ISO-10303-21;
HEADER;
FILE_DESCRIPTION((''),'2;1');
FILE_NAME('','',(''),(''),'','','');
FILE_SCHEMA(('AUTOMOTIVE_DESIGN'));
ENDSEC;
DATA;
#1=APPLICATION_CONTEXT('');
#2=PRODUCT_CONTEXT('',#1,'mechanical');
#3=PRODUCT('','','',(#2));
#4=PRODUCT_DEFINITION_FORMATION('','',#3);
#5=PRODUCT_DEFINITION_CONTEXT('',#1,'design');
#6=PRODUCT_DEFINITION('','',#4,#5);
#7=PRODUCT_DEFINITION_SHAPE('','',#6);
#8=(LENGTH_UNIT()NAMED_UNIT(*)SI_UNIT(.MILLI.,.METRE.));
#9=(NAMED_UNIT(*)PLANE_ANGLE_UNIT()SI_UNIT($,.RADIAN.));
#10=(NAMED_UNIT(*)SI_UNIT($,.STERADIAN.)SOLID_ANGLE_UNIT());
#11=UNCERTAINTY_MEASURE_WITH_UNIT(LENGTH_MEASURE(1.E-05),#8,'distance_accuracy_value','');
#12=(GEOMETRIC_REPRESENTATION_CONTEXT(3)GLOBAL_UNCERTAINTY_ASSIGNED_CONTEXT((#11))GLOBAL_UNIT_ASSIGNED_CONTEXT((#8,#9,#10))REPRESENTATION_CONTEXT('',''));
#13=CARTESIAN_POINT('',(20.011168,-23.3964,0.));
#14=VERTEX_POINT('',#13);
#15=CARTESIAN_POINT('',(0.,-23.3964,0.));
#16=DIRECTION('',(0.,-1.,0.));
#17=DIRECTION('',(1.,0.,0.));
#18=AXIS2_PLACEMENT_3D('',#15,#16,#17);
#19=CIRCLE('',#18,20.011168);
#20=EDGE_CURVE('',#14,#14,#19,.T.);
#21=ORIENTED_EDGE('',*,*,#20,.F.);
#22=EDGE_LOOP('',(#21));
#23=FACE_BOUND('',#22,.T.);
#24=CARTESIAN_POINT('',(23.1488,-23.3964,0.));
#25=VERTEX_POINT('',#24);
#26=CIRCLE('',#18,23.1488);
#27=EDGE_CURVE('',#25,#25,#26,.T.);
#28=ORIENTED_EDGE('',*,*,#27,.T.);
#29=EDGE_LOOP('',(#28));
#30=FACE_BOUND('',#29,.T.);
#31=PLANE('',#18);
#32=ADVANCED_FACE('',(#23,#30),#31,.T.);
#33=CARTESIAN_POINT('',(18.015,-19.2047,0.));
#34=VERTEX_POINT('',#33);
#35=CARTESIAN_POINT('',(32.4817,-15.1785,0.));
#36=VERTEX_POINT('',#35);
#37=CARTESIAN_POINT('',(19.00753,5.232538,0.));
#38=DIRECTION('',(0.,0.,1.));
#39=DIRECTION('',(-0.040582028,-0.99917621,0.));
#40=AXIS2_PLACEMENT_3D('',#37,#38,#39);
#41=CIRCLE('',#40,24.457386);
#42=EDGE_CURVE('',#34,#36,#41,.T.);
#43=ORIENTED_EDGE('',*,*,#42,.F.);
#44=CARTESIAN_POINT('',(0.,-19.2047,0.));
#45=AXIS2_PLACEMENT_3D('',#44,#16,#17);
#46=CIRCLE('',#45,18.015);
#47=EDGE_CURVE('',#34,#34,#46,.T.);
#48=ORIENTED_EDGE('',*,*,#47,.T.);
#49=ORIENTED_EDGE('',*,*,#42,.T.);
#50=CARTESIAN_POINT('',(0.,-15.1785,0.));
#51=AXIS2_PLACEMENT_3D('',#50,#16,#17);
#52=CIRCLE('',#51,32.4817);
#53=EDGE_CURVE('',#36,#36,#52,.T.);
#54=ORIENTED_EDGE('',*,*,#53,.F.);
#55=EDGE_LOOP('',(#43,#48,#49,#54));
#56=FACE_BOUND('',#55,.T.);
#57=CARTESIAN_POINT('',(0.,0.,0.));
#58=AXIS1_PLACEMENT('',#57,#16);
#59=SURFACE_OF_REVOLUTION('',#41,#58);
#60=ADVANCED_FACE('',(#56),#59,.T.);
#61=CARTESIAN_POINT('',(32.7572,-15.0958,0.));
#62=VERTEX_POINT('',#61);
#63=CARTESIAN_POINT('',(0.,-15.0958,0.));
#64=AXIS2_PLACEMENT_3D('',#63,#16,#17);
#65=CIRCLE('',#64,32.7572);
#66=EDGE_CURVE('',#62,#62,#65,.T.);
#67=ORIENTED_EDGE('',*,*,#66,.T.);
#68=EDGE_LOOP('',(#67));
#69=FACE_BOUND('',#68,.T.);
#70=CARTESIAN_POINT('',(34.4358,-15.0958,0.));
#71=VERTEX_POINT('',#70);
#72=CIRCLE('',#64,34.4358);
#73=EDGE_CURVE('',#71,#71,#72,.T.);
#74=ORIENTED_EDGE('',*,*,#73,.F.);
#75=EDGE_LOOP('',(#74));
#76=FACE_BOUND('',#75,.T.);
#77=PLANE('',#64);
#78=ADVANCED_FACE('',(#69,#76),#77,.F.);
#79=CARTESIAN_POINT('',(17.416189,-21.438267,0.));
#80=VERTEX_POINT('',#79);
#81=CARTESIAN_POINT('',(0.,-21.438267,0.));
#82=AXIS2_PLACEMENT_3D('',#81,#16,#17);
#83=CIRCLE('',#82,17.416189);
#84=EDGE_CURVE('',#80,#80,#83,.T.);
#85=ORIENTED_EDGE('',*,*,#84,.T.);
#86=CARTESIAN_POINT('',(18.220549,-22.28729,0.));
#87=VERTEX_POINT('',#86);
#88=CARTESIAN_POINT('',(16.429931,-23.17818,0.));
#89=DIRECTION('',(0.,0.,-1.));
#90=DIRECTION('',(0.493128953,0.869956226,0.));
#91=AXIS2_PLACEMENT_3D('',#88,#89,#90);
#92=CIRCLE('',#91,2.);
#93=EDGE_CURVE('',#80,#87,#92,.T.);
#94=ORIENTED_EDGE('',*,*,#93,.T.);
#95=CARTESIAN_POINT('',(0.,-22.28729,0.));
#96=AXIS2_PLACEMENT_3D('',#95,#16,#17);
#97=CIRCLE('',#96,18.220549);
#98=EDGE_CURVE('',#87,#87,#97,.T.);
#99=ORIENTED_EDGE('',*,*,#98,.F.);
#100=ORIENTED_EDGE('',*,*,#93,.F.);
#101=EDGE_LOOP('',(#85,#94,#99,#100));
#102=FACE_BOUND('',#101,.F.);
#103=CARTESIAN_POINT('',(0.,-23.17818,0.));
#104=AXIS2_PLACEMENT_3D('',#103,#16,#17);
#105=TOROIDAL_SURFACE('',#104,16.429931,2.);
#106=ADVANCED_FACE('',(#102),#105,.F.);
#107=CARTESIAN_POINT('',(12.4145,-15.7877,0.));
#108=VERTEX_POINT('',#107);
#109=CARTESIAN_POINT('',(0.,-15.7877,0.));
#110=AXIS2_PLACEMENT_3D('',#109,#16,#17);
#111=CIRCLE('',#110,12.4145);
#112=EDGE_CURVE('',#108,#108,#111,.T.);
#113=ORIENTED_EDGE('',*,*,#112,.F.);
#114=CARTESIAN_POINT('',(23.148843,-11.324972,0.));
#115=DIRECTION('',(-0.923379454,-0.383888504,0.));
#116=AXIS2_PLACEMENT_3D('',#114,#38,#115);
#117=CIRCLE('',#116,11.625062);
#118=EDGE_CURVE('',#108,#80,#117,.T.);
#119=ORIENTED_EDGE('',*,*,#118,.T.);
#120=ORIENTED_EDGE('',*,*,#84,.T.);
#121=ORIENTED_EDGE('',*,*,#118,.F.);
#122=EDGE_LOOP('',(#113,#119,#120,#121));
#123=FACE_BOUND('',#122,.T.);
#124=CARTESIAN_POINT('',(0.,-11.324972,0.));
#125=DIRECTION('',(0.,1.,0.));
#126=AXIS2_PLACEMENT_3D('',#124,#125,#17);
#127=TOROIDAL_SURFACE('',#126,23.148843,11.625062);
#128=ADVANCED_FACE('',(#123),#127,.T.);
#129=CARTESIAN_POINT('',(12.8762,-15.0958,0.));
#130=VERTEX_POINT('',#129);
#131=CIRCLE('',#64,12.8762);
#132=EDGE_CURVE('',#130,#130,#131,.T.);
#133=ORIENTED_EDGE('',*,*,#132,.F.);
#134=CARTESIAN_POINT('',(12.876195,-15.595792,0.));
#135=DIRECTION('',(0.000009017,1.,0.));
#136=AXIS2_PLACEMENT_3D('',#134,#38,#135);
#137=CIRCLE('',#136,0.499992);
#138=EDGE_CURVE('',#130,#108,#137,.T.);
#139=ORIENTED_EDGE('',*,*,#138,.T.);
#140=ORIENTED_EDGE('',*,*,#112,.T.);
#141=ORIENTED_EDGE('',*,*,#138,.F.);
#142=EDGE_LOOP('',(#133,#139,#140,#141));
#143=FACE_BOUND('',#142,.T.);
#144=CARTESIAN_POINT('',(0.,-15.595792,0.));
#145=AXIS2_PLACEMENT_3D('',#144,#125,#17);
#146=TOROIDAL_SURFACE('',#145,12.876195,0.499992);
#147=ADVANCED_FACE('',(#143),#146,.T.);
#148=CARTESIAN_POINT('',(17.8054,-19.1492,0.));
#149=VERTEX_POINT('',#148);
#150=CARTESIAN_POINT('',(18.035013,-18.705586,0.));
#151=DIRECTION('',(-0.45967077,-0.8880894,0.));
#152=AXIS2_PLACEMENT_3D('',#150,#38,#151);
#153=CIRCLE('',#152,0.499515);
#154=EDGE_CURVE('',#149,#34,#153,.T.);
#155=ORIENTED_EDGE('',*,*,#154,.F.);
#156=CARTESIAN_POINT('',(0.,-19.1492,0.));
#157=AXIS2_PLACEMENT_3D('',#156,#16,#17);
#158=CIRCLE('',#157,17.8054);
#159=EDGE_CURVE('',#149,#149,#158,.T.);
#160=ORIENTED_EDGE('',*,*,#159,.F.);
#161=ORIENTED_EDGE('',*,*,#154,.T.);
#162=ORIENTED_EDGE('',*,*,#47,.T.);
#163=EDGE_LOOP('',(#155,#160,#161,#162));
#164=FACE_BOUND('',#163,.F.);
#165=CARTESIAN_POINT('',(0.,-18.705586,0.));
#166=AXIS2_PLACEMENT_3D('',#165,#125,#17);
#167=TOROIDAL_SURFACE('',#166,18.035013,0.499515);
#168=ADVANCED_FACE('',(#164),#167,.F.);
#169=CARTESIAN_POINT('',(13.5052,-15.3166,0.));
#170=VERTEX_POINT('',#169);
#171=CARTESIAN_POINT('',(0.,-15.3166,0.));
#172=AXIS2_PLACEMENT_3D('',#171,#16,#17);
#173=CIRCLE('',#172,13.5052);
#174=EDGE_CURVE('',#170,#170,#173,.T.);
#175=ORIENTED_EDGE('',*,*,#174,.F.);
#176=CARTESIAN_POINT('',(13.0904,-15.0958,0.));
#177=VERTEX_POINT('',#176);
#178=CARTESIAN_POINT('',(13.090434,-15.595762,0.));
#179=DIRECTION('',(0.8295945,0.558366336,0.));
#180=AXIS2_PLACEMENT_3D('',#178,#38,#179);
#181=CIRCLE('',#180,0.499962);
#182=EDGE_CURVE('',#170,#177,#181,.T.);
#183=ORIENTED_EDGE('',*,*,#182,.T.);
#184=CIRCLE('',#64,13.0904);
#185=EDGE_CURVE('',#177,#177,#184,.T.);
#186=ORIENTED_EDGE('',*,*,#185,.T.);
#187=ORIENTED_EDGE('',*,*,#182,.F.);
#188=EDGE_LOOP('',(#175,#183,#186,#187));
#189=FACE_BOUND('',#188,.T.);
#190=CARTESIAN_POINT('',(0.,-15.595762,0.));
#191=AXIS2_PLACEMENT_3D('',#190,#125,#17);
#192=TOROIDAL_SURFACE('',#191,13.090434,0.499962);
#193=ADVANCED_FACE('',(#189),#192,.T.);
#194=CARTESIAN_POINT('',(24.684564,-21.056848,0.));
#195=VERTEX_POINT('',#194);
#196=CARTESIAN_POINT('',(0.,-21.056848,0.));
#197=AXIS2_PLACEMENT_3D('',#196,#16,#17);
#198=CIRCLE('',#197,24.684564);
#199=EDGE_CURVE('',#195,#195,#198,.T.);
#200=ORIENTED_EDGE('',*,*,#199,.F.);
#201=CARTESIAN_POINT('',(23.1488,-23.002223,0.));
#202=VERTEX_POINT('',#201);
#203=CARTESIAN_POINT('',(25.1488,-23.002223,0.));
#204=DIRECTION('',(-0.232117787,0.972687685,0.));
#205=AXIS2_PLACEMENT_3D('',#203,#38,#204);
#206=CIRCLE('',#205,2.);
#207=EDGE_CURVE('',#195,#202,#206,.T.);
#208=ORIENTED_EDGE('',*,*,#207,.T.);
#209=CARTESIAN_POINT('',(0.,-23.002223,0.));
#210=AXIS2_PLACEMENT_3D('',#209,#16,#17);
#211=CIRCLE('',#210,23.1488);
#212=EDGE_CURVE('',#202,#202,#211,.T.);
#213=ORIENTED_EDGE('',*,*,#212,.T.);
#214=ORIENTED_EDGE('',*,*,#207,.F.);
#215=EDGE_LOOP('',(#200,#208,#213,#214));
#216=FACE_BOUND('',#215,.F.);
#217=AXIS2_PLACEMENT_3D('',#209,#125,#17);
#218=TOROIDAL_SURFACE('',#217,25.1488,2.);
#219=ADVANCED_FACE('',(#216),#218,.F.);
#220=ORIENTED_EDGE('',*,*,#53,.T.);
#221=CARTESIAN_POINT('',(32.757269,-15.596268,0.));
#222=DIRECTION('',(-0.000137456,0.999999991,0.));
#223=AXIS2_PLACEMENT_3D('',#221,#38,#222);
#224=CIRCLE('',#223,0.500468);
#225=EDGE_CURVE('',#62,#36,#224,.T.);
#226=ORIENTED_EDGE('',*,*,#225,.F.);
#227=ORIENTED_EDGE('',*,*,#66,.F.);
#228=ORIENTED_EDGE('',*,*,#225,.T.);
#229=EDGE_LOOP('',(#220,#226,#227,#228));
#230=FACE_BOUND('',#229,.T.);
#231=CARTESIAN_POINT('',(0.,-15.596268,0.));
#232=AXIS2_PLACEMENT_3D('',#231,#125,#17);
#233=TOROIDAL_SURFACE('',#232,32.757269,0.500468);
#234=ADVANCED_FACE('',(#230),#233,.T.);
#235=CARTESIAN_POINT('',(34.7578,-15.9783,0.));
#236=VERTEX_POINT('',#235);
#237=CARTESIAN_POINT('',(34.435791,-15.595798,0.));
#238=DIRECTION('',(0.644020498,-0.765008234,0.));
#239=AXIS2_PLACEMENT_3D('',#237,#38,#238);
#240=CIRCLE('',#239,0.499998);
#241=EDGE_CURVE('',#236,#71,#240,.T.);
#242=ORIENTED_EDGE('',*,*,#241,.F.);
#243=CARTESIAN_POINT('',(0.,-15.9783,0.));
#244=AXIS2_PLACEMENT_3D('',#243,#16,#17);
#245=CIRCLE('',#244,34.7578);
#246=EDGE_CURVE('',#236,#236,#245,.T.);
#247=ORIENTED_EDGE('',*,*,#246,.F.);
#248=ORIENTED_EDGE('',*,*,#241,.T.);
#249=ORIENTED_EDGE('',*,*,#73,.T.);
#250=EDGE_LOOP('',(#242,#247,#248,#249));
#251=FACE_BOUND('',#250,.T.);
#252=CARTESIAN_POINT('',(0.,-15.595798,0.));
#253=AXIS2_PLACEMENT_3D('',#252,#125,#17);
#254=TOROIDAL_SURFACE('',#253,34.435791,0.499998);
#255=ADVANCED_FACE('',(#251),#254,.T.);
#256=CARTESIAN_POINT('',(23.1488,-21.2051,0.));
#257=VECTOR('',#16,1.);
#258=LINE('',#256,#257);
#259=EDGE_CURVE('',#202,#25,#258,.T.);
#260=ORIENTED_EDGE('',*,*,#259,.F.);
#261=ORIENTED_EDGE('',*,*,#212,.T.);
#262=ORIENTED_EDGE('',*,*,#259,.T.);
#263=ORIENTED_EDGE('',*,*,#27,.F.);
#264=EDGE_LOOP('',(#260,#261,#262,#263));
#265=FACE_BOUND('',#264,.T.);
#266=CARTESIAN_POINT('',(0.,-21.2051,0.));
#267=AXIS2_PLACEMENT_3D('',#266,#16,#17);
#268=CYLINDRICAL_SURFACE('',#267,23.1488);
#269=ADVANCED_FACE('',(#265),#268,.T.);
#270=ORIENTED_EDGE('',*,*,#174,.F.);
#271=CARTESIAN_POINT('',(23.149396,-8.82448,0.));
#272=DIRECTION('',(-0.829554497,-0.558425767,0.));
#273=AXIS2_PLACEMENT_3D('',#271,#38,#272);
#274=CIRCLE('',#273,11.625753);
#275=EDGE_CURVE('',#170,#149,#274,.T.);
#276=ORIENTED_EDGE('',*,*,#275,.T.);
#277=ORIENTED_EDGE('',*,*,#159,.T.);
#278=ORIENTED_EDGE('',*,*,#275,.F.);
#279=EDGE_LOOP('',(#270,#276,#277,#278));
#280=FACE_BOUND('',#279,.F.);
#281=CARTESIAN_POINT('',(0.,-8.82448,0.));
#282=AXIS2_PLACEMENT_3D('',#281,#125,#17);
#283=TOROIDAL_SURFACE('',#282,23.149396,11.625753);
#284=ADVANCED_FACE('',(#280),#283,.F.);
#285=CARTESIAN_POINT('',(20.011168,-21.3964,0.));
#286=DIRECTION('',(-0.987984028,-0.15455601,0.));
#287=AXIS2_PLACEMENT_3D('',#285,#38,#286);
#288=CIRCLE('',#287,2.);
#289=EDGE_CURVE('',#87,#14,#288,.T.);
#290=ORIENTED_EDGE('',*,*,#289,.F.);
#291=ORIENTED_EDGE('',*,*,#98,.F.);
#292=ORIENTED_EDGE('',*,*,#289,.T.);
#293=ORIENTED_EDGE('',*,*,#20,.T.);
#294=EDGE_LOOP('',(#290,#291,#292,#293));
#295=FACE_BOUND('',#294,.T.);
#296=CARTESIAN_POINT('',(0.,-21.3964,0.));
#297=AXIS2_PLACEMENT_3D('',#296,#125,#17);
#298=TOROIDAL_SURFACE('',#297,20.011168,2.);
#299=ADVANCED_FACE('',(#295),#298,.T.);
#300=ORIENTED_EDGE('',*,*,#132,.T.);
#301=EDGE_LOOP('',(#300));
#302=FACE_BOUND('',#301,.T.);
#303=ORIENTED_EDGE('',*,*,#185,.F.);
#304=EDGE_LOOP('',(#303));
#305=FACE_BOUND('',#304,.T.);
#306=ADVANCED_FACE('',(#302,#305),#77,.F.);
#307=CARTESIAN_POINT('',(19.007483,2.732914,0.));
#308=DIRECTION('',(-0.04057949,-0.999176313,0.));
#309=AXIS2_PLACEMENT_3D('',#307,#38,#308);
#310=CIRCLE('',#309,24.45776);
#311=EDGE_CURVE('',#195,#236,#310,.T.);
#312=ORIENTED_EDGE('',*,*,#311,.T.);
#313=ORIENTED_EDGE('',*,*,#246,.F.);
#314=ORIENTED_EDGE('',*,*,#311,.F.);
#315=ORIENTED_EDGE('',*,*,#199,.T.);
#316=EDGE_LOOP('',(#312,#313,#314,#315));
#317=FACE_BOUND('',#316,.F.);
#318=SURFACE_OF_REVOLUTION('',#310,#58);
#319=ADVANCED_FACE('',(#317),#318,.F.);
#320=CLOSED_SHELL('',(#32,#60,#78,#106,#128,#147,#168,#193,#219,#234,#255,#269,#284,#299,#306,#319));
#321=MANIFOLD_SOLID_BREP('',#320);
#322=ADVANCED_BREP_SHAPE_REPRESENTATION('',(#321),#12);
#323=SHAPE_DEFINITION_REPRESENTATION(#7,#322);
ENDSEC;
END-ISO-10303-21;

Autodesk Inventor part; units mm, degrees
ref_plane "YZ Plane" through (0, 0, 0) normal (1, 0, 0) x (0, 1, 0)
ref_plane "XZ Plane" through (0, 0, 0) normal (0, 1, 0) x (-1, 0, 0)
ref_plane "XY Plane" through (0, 0, 0) normal (0, 0, 1) x (1, 0, 0)
sketch "Sketch1" plane through (0, 0, 0) normal (0, 0, 1) x (1, 0, 0)
  arc A0 (13.5052, -15.3166) -> (17.8054, -19.1492) centre (23.1488, -8.825) ccw
  line L0 (17.9048, -19.2) -> (17.9048, -21.7)
  arc A1 (12.4145, -15.7877) -> (17.8054, -21.6492) centre (23.1488, -11.325) ccw
  arc A2 (18.015, -21.7047) -> (34.7578, -15.9783) centre (19.0075, 2.7328) ccw
  arc A3 (18.015, -19.2047) -> (32.4817, -15.1785) centre (19.0075, 5.2328) ccw
  arc A4 (43.4332, 3.9828) -> (43.4613, 4.8) centre (19.0075, 5.2328) ccw
  line L1 (12.8762, -15.0958) -> (13.0904, -15.0958)
  line L2 (32.7572, -15.0958) -> (34.4358, -15.0958)
  arc A5 (13.5052, -15.3166) -> (13.0904, -15.0958) centre (13.0904, -15.5958) ccw
  arc A6 (12.8762, -15.0958) -> (12.4145, -15.7877) centre (12.8762, -15.5958) ccw
  arc A7 (32.7572, -15.0958) -> (32.4817, -15.1785) centre (32.7572, -15.5958) ccw
  arc A8 (34.7578, -15.9783) -> (34.4358, -15.0958) centre (34.4358, -15.5958) ccw
  arc A9 (17.8054, -21.6492) -> (18.015, -21.7047) centre (18.0352, -21.2051) ccw
  arc A10 (17.8054, -19.1492) -> (18.015, -19.2047) centre (18.0352, -18.7051) ccw
  line L3 (0, 0) -> (0, -27.4347)
  line L4 (18.0352, -21.2051) -> (23.1488, -21.2051)
  line L5 (23.1488, -21.2051) -> (23.1488, -23.3964)
  line L6 (23.1488, -23.3964) -> (18.0352, -23.3964)
  line L7 (18.0352, -23.3964) -> (18.0352, -21.2051)
  point P0 (13.3602, -15.0958)
  point P1 (12.1524, -15.0958)
  point P2 (35.7502, -15.0958)
  point P3 (32.6062, -15.0958)
  point P4 (18.0352, -21.7055)
  point P5 (23.1488, -21.3717)
  dimension "d0" = 2.5
  dimension "d1" = 0.5
revolve "Revolution2" add sketch "Sketch1" angle 360 about axis through (0, 0, 0) along (0, -1, 0)
fillet "Fillet6" radius 2 3 edges at (-23.1488, -21.3717, 0) (-18.0352, -23.3964, 0) (-18.0352, -21.7055, 0)
properties part number "8003_base_250uH_DCore_2layer_Tx_Filter_MPSv2_v3" material "Acetal Resin, White"
